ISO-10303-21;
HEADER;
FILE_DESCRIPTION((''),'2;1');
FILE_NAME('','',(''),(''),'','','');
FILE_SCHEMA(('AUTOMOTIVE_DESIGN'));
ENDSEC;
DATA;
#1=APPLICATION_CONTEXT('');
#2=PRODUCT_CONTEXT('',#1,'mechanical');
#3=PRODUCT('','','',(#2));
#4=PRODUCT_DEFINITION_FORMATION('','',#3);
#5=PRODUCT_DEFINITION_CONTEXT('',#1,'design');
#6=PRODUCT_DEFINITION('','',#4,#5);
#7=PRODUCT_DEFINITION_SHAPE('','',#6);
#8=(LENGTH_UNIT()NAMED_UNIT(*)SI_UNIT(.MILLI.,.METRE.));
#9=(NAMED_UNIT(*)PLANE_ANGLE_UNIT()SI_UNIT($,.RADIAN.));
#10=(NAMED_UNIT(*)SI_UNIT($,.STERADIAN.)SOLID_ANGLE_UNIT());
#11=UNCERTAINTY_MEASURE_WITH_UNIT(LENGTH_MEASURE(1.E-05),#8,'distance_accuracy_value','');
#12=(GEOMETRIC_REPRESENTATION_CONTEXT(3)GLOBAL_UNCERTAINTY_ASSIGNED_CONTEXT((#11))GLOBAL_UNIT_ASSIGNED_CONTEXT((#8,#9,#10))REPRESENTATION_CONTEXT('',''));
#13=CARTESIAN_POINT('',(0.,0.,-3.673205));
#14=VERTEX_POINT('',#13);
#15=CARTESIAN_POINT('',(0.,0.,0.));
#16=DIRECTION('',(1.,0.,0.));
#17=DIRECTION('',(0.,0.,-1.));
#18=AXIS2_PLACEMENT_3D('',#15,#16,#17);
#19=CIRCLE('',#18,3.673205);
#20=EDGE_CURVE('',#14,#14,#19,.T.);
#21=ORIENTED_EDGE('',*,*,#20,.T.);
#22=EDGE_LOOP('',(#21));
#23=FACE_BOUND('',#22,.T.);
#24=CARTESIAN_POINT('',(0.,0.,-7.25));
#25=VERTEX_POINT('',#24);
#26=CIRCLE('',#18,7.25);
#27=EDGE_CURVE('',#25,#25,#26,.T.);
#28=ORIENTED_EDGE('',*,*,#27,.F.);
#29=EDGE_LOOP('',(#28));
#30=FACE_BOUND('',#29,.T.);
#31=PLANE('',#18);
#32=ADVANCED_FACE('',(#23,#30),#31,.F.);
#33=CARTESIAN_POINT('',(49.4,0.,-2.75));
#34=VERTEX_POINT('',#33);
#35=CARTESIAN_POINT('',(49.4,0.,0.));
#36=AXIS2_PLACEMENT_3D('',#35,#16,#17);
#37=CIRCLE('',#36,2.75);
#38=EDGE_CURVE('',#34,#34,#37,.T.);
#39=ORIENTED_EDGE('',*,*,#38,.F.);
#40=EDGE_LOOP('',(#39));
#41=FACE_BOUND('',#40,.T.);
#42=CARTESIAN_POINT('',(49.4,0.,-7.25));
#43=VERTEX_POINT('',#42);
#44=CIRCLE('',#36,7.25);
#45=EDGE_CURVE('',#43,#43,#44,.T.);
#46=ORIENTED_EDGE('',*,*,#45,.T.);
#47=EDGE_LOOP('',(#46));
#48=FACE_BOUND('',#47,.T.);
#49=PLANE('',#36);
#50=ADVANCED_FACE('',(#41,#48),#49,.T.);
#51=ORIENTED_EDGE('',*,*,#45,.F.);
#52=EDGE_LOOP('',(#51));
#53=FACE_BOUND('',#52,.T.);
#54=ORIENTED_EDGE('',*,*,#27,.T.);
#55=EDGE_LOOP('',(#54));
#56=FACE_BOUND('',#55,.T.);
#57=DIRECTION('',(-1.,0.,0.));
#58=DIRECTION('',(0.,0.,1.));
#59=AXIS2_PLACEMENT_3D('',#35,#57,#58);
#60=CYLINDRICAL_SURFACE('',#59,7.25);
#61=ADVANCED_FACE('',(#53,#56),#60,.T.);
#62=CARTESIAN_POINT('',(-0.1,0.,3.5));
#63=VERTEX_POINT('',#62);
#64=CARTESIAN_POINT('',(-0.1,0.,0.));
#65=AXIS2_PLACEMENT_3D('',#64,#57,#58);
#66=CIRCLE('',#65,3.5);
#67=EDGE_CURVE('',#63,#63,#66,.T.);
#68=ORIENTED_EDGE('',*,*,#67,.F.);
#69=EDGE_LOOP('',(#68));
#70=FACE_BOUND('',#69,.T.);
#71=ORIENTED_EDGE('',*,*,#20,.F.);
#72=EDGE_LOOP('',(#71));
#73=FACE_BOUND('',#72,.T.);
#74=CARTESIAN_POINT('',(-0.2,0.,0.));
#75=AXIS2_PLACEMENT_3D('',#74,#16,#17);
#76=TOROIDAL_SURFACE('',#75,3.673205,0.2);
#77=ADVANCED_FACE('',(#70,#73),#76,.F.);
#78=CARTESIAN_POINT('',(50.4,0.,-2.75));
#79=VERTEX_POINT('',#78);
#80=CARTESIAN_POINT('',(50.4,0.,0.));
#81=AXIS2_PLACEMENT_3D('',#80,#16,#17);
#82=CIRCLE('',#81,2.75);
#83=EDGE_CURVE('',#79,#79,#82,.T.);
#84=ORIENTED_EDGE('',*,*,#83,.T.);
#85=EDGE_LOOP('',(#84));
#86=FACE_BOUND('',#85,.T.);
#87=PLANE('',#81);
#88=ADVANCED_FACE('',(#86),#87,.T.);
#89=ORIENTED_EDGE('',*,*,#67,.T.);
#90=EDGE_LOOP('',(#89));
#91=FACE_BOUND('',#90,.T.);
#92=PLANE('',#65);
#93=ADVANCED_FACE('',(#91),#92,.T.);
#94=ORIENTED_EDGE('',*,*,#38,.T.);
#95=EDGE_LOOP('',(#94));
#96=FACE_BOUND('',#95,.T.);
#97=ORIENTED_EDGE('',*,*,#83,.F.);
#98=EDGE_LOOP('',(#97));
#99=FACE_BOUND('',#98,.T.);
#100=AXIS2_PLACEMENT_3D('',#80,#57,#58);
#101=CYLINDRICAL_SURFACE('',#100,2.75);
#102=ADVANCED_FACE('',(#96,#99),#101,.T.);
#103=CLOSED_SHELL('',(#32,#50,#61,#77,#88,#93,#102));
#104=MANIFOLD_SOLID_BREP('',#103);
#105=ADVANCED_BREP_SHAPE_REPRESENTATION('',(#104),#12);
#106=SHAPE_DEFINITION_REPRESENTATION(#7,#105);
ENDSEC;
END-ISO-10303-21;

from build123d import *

# Parameters (mm, degrees)
SKETCH1_R           = 7.25
BOSS_EXTRUDE1_DEPTH = 49.4
SKETCH2_R           = 2.75
BOSS_EXTRUDE2_DEPTH = 1
SKETCH3_R           = 3.5
BOSS_EXTRUDE3_DEPTH = 0.1
FILLET1_R           = 0.2


with BuildPart() as part:
    # Sketch1 → Boss-Extrude1 (new body)
    with BuildSketch(Plane(origin=(0, 0, 0), x_dir=(0, 0, -1), z_dir=(1, 0, 0))):
        Circle(SKETCH1_R)
    extrude(amount=BOSS_EXTRUDE1_DEPTH)

    # Sketch2 → Boss-Extrude2 (add)
    with BuildSketch(Plane(origin=(49.4, 0, 0), x_dir=(0, 0, -1), z_dir=(1, 0, 0))):
        Circle(SKETCH2_R)
    extrude(amount=BOSS_EXTRUDE2_DEPTH)

    # Sketch3 → Boss-Extrude3 (add)
    with BuildSketch(Plane.ZY):
        with Locations(Location((0, 0, 0), (0, 0, 180))):
            Circle(SKETCH3_R)
    extrude(amount=BOSS_EXTRUDE3_DEPTH)

    # Fillet1
    # the kernel refuses this fillet: 0.2 mm, written as the material it adds along each edge
    with BuildSketch(Plane(origin=(0, 0, 0), x_dir=(0, 0, -1), z_dir=(0, 1, 0))) as fillet1_piece_1:
        with BuildLine():
            CenterArc((3.673205081, 0.2), FILLET1_R, 210, 60)
            Line((3.5, 0.1), (3.496535898, 0.098))
            ThreePointArc((3.496535898, 0.098), (3.496, 0.05), (3.496, 0))
            Line((3.496, 0), (3.5, -0.004))
            Line((3.5, -0.004), (3.673205081, -0.004))
            Line((3.673205081, -0.004), (3.673205081, 0))
        make_face()
    revolve(axis=Axis((0, 0, 0), (-1, 0, 0)))


solid = part.part
